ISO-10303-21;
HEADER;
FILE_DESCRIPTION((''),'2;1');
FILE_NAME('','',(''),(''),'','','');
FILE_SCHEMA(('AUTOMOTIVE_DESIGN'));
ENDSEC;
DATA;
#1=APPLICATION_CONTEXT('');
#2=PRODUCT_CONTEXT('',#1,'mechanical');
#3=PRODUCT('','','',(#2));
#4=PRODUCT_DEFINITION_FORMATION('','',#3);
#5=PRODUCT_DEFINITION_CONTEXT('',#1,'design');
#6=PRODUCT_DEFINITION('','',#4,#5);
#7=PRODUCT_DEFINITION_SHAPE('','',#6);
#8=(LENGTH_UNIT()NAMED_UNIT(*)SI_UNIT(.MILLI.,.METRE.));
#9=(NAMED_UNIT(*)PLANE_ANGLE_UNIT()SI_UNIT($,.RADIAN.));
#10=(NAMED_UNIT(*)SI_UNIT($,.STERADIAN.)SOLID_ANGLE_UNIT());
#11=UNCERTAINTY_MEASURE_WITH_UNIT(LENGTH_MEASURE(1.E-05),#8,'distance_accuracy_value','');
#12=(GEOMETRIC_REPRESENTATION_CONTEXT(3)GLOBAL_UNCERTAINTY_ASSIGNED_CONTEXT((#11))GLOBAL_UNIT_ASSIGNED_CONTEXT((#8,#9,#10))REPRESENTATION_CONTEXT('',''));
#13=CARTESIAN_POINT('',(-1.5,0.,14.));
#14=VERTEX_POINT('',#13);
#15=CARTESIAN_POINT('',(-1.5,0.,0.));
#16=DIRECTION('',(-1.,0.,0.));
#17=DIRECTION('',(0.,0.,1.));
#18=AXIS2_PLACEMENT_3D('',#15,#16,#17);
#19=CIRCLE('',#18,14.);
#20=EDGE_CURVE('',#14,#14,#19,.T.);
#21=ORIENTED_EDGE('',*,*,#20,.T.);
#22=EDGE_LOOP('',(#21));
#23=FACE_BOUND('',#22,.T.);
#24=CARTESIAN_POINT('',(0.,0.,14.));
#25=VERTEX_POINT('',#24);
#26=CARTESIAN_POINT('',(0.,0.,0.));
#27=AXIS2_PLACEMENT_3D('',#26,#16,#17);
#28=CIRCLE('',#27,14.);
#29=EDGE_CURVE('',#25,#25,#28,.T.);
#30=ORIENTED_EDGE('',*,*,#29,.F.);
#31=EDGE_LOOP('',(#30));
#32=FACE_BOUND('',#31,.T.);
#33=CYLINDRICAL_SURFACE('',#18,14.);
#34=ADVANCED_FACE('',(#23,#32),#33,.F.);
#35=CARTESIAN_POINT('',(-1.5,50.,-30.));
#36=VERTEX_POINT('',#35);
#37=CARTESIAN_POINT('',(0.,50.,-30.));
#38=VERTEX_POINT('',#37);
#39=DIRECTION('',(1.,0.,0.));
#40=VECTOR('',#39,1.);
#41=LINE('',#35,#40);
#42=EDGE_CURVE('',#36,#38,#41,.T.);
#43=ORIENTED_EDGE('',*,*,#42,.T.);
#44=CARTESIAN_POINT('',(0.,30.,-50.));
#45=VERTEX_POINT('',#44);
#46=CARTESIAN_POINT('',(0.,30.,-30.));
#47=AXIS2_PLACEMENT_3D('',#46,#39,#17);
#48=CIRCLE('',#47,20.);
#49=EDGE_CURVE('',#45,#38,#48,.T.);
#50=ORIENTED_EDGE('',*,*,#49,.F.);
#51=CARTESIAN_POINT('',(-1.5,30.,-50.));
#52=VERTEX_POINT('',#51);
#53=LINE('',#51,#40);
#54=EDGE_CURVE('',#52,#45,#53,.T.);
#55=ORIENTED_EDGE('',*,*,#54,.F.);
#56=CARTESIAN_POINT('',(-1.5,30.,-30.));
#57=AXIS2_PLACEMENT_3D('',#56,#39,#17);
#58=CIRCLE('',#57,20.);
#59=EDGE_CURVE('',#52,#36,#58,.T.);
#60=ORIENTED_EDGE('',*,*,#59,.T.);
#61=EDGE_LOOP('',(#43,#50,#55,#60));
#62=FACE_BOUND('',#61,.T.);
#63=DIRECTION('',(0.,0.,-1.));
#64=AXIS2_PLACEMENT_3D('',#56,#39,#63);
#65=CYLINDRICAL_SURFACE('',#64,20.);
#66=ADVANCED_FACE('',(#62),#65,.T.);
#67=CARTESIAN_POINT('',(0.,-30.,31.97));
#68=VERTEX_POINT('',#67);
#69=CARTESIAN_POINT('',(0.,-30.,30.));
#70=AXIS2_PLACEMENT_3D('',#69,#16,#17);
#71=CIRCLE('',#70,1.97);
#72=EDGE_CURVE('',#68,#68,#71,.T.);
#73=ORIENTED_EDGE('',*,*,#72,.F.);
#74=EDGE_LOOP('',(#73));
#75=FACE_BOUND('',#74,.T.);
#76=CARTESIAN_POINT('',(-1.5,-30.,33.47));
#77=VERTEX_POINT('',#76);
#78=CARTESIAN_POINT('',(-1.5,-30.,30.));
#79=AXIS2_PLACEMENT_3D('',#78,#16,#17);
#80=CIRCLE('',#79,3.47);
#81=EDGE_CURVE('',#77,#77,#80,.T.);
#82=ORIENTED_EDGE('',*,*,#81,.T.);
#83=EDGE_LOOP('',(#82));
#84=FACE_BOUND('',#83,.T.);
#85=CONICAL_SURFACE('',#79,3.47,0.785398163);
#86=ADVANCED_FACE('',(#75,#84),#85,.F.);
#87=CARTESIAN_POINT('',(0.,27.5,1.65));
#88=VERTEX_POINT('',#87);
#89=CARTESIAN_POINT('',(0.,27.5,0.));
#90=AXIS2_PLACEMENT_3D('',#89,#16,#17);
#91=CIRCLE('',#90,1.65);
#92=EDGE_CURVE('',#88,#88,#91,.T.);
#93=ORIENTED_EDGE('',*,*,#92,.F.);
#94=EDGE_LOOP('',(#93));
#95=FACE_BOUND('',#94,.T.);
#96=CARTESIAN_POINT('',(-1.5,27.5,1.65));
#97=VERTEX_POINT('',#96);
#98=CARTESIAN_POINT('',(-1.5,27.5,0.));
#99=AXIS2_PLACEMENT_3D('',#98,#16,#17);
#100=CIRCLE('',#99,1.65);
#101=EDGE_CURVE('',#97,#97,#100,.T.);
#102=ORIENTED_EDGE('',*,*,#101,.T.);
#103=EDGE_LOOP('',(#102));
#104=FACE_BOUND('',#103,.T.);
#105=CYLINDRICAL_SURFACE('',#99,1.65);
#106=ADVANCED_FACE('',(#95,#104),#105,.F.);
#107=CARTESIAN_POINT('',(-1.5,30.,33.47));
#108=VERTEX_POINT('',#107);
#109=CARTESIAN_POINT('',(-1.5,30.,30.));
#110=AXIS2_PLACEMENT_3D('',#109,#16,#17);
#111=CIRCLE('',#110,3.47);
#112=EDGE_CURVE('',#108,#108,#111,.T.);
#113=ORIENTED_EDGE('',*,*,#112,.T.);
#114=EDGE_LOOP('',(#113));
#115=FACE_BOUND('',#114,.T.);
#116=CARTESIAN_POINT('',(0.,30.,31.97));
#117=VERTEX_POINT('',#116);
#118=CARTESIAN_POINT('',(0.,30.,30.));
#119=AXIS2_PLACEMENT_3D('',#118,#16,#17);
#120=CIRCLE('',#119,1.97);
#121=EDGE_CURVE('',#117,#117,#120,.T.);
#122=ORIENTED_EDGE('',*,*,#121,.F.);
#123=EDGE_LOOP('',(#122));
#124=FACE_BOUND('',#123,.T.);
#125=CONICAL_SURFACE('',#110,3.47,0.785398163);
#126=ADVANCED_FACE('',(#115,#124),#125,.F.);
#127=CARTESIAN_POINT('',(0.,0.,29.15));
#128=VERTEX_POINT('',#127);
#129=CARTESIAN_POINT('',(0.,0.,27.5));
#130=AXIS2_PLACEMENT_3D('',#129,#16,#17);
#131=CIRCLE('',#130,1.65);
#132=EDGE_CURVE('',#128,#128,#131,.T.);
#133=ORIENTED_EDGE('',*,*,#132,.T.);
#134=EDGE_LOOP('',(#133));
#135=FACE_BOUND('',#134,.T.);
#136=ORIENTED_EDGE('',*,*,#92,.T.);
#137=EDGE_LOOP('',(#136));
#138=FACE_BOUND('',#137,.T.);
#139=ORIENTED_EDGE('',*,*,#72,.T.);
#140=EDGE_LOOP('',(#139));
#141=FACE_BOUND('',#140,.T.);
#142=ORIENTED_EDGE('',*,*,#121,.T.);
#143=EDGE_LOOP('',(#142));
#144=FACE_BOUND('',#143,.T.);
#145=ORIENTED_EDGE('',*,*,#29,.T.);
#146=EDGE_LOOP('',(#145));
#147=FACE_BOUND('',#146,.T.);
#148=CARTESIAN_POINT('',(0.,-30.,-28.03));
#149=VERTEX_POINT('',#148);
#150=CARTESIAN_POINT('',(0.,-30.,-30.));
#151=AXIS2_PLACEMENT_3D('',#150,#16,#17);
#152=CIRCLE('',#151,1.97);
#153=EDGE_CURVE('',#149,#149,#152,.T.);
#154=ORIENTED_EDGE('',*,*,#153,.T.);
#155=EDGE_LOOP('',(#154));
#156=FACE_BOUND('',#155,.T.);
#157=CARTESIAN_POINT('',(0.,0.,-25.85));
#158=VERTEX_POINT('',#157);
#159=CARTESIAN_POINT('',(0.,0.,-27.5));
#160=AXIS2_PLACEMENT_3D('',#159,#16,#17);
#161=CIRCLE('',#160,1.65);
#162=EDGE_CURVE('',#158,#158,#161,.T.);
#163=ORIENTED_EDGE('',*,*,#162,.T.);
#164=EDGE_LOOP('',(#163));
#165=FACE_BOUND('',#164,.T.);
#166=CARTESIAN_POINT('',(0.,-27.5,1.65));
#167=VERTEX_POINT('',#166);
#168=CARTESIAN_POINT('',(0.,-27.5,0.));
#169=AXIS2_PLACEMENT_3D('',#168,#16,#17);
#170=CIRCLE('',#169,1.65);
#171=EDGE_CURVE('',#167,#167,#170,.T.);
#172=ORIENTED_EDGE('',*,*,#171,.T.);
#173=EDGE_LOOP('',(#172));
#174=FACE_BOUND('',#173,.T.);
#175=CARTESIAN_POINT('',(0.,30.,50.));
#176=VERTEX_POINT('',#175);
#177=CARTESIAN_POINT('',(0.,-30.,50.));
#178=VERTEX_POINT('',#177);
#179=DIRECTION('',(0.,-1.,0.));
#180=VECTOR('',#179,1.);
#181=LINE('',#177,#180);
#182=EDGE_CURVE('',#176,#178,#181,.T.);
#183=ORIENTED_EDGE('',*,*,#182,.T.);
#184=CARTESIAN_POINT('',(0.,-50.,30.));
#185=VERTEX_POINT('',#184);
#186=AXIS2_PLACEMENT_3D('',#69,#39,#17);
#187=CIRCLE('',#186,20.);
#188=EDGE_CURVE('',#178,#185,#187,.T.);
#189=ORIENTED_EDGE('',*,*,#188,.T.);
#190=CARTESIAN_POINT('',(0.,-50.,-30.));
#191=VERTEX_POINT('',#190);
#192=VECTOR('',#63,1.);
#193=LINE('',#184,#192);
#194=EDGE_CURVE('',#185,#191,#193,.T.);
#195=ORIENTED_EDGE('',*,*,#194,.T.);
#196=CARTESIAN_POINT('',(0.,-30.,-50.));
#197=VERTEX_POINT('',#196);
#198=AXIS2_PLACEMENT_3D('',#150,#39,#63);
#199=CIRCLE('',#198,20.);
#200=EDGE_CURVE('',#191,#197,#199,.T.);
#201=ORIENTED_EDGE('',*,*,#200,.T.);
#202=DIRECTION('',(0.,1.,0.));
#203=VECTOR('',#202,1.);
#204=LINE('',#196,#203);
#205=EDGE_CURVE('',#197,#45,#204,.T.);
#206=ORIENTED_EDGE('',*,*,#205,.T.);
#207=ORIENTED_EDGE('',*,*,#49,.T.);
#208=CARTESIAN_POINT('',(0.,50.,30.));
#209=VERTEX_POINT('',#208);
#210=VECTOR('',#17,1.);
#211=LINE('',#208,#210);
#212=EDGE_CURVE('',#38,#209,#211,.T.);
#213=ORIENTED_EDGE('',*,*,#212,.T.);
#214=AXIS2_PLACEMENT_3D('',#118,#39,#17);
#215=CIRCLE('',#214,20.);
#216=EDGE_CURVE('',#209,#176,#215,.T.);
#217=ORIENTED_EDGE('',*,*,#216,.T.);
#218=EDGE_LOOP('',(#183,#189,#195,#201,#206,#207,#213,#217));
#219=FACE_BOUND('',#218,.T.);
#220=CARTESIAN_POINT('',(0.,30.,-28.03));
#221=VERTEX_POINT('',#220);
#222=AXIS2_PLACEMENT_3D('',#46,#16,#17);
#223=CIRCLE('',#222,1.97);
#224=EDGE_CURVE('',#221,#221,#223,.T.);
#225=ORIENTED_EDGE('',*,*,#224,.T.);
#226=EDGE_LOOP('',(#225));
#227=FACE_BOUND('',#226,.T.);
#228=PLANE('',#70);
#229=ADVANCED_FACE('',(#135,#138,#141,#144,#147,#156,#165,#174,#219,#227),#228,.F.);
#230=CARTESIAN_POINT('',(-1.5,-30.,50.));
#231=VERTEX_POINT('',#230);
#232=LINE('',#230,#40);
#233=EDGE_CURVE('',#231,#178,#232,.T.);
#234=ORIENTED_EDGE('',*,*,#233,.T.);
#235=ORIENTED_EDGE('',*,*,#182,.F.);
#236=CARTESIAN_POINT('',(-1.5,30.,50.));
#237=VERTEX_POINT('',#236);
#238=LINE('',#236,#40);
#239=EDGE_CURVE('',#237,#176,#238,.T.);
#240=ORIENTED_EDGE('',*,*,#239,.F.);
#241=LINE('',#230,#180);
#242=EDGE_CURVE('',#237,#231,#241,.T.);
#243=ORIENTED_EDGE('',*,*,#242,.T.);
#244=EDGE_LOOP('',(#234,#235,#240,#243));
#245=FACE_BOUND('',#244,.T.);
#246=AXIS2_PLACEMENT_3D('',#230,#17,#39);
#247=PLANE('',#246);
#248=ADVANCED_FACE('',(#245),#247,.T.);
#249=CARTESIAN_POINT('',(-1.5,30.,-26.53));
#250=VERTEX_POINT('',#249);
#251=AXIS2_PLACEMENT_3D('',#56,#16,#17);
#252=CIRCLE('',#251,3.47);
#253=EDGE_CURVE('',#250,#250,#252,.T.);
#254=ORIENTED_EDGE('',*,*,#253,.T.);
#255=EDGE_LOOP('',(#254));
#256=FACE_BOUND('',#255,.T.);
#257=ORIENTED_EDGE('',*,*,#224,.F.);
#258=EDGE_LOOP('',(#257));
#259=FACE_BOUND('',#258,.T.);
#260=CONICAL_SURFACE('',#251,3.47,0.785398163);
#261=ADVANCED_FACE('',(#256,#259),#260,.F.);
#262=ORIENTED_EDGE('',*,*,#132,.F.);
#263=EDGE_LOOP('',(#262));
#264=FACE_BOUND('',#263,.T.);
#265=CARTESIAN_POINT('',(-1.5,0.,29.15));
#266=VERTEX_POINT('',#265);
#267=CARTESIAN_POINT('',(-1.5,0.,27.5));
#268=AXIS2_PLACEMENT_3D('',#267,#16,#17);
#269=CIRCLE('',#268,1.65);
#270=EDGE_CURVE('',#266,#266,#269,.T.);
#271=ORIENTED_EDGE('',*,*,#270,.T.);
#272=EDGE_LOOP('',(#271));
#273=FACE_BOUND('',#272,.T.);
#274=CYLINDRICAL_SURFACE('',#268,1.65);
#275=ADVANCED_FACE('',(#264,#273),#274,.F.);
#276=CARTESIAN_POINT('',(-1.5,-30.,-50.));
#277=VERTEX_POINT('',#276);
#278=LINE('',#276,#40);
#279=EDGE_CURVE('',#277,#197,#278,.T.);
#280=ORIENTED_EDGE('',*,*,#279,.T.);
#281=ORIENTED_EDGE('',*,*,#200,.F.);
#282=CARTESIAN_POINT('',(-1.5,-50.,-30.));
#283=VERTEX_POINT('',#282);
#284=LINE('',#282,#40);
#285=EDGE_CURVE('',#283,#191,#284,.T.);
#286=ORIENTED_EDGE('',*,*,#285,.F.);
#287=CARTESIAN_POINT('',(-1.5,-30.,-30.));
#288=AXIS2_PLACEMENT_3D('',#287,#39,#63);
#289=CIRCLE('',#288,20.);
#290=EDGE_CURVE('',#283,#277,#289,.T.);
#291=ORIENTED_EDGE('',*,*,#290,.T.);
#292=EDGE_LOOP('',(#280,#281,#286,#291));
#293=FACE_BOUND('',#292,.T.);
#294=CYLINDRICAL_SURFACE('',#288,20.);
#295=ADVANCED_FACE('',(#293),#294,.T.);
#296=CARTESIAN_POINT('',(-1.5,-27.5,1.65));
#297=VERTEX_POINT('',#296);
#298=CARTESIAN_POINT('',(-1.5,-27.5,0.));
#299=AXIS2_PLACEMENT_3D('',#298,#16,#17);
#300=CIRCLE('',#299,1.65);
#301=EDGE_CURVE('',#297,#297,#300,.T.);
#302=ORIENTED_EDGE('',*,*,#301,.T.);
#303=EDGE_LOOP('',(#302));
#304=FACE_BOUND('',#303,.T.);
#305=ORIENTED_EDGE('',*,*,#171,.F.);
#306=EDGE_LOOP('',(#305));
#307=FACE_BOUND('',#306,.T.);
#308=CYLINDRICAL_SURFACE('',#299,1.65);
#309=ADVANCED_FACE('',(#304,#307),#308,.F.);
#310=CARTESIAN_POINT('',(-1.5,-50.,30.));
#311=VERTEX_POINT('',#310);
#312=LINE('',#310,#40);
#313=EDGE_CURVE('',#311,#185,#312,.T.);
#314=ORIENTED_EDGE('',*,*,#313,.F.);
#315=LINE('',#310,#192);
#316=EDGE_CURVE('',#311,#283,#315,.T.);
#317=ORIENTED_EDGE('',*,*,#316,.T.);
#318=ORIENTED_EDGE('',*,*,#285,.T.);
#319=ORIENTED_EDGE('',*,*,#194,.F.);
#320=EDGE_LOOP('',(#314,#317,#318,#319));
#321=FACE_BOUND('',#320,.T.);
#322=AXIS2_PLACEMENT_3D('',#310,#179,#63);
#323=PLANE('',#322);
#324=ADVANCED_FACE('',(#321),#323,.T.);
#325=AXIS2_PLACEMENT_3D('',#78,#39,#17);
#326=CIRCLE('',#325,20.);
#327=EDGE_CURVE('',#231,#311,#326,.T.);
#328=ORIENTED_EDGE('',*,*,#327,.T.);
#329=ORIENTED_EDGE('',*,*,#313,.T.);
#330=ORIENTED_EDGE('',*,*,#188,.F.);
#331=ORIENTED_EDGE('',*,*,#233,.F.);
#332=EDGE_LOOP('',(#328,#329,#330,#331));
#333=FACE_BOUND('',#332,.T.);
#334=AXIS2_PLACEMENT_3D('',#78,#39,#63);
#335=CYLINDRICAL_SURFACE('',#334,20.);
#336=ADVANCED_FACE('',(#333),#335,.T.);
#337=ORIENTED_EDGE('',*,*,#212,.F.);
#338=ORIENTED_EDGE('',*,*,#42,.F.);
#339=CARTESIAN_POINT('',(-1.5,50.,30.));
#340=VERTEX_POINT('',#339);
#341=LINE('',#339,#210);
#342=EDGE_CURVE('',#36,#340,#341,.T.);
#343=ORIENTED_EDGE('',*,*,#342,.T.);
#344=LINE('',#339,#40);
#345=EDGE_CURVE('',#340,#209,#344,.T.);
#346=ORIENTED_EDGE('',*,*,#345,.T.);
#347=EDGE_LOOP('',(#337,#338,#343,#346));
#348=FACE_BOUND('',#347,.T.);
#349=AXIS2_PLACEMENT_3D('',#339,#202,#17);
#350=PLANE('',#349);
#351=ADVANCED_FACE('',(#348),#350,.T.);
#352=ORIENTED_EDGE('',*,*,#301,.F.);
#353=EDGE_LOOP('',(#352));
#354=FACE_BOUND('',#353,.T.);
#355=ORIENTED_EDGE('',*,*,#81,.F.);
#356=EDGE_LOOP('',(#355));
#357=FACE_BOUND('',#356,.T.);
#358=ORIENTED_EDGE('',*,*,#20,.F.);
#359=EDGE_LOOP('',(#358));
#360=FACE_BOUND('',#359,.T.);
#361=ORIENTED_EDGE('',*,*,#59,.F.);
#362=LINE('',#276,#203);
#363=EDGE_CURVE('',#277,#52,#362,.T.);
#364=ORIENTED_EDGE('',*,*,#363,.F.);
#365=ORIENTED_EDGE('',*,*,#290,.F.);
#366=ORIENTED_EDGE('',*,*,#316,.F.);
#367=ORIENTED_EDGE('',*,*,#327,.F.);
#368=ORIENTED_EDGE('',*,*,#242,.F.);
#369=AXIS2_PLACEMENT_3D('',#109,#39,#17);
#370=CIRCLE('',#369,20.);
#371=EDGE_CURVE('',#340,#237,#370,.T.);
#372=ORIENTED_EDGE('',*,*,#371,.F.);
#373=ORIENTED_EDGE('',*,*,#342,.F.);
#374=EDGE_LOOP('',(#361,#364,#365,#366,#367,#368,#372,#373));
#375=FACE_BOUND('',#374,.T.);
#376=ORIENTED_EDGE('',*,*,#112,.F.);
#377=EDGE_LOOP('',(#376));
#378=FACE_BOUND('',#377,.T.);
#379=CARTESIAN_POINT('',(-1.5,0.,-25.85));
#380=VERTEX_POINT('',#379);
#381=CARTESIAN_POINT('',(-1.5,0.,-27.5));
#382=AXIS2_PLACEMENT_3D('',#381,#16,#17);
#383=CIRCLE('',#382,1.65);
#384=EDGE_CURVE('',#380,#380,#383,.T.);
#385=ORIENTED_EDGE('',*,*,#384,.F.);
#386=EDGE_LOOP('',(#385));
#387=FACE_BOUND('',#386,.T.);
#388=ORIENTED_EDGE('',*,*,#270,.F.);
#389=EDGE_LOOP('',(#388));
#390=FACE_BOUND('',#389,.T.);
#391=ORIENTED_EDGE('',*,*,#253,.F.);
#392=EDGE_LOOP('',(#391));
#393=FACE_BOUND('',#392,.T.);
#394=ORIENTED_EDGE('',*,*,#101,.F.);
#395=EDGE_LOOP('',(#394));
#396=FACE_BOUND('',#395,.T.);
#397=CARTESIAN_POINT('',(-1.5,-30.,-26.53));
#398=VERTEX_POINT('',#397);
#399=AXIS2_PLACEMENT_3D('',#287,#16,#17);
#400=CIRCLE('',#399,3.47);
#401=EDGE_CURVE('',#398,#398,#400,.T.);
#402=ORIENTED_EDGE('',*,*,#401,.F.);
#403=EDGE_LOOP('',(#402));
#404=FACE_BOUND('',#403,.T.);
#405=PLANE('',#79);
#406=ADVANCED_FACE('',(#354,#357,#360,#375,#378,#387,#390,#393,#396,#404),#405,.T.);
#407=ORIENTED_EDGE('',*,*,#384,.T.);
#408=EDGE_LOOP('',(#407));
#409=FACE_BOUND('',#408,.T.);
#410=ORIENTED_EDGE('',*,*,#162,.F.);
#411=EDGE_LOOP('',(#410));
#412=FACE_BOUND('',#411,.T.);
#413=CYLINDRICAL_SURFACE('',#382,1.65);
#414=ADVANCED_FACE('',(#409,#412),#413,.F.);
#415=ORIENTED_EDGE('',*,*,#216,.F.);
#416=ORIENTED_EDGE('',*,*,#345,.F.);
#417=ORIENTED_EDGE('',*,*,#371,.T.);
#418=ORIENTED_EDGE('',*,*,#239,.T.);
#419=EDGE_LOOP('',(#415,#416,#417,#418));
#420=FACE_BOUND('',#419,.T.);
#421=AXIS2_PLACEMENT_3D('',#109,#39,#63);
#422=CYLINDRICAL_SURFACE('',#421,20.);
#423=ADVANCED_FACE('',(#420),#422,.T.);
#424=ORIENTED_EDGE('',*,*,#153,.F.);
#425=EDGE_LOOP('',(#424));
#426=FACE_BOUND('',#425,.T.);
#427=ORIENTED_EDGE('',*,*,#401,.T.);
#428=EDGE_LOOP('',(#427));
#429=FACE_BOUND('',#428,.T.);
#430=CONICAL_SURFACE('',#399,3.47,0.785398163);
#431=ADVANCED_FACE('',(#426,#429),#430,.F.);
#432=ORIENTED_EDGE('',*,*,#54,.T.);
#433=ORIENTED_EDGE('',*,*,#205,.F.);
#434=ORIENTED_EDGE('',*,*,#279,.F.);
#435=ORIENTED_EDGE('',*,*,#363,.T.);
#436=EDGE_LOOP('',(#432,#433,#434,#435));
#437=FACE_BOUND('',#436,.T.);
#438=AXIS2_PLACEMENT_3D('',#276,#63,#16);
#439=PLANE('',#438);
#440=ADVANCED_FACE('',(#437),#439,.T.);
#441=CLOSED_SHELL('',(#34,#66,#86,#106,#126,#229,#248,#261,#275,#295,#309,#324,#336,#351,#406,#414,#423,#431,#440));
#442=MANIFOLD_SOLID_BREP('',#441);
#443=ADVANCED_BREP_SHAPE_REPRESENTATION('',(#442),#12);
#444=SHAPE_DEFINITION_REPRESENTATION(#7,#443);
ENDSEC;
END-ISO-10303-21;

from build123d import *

# Parameters (mm, degrees)
SM_BASE_FLANGE_1_DEPTH      = 1.5
HOLE_WIZARD_M3_1_AT_2_COUNT = 2
HOLE_WIZARD_M3_1_AT_2_PITCH = 60
HOLE_WIZARD_M3_1_AT_3_COUNT = 2
HOLE_WIZARD_M3_1_AT_3_PITCH = 84.852813742
HOLE_WIZARD_M3_1_AT_4_COUNT = 2
HOLE_WIZARD_M3_1_AT_4_PITCH = 60
HOLE_WIZARD_1_D             = 28
HOLE_WIZARD_1_DEPTH         = 100
HOLE_WIZARD_M4_1_D          = 3.3
PATTERN_CIRCULAR_1_COUNT    = 4


# Sheet-metal steps are written as plain solids
with BuildPart() as part:
    # Sketch 1 → 基体-法兰1 (new body)
    with BuildSketch(Plane(origin=(0, 0, 0), x_dir=(0, 0, -1), z_dir=(1, 0, 0))):
        with BuildLine():
            Line((-30, -50), (30, -50))
            ThreePointArc((30, -50), (44.142135624, -44.142135624), (50, -30))
            Line((50, -30), (50, 30))
            ThreePointArc((50, 30), (44.142135624, 44.142135624), (30, 50))
            Line((30, 50), (-30, 50))
            ThreePointArc((-30, 50), (-44.142135624, 44.142135624), (-50, 30))
            Line((-50, 30), (-50, -30))
            ThreePointArc((-50, -30), (-44.142135624, -44.142135624), (-30, -50))
        make_face()
    extrude(amount=-SM_BASE_FLANGE_1_DEPTH)

    # 草图4 → M3 六角凹锥坑头螺钉的锥形沉头孔1 (revolve, cut)
    with BuildSketch(Plane(origin=(-1.5, 30, -30), x_dir=(0, 0, 1), z_dir=(0, 1, 0))):
        Polygon((0, 0), (0, 1.5), (1.7, 1.5), (1.7, 1.77), (3.47, 0), align=None)
    hole_wizard_m3_1 = revolve(axis=Axis((-7.85, 30, -30), (1, 0, 0)), mode=Mode.SUBTRACT)

    # M3 六角凹锥坑头螺钉的锥形沉头孔1 at 2: M3 六角凹锥坑头螺钉的锥形沉头孔1 ×2
    with Locations(*[(0, 0, i * HOLE_WIZARD_M3_1_AT_2_PITCH) for i in range(1, HOLE_WIZARD_M3_1_AT_2_COUNT)]):
        add(hole_wizard_m3_1, mode=Mode.SUBTRACT)

    # M3 六角凹锥坑头螺钉的锥形沉头孔1 at 3: M3 六角凹锥坑头螺钉的锥形沉头孔1 ×2
    with Locations(*[Vector(0, -0.7071067811865476, 0.7071067811865476) * (i * HOLE_WIZARD_M3_1_AT_3_PITCH) for i in range(1, HOLE_WIZARD_M3_1_AT_3_COUNT)]):
        add(hole_wizard_m3_1, mode=Mode.SUBTRACT)

    # M3 六角凹锥坑头螺钉的锥形沉头孔1 at 4: M3 六角凹锥坑头螺钉的锥形沉头孔1 ×2
    with Locations(*[(0, -i * HOLE_WIZARD_M3_1_AT_4_PITCH, 0) for i in range(1, HOLE_WIZARD_M3_1_AT_4_COUNT)]):
        add(hole_wizard_m3_1, mode=Mode.SUBTRACT)

    # 孔1
    with Locations(Plane.ZY.offset(1.5)):
        with Locations((0, 0)):
            Hole(HOLE_WIZARD_1_D / 2, depth=HOLE_WIZARD_1_DEPTH)

    # M4 螺纹孔1 (through all)
    with Locations(Plane.ZY.offset(1.5)):
        with Locations((0, 27.5)):
            hole_wizard_m4_1 = Hole(HOLE_WIZARD_M4_1_D / 2)

    # 阵列(圆周)1: M4 螺纹孔1 ×4 about axis
    pattern_circular_1_axis = Axis((0, 0, 0), (1, 0, 0))
    for i in range(1, PATTERN_CIRCULAR_1_COUNT):
        add(hole_wizard_m4_1.rotate(pattern_circular_1_axis, i * 360 / PATTERN_CIRCULAR_1_COUNT), mode=Mode.SUBTRACT)


solid = part.part
